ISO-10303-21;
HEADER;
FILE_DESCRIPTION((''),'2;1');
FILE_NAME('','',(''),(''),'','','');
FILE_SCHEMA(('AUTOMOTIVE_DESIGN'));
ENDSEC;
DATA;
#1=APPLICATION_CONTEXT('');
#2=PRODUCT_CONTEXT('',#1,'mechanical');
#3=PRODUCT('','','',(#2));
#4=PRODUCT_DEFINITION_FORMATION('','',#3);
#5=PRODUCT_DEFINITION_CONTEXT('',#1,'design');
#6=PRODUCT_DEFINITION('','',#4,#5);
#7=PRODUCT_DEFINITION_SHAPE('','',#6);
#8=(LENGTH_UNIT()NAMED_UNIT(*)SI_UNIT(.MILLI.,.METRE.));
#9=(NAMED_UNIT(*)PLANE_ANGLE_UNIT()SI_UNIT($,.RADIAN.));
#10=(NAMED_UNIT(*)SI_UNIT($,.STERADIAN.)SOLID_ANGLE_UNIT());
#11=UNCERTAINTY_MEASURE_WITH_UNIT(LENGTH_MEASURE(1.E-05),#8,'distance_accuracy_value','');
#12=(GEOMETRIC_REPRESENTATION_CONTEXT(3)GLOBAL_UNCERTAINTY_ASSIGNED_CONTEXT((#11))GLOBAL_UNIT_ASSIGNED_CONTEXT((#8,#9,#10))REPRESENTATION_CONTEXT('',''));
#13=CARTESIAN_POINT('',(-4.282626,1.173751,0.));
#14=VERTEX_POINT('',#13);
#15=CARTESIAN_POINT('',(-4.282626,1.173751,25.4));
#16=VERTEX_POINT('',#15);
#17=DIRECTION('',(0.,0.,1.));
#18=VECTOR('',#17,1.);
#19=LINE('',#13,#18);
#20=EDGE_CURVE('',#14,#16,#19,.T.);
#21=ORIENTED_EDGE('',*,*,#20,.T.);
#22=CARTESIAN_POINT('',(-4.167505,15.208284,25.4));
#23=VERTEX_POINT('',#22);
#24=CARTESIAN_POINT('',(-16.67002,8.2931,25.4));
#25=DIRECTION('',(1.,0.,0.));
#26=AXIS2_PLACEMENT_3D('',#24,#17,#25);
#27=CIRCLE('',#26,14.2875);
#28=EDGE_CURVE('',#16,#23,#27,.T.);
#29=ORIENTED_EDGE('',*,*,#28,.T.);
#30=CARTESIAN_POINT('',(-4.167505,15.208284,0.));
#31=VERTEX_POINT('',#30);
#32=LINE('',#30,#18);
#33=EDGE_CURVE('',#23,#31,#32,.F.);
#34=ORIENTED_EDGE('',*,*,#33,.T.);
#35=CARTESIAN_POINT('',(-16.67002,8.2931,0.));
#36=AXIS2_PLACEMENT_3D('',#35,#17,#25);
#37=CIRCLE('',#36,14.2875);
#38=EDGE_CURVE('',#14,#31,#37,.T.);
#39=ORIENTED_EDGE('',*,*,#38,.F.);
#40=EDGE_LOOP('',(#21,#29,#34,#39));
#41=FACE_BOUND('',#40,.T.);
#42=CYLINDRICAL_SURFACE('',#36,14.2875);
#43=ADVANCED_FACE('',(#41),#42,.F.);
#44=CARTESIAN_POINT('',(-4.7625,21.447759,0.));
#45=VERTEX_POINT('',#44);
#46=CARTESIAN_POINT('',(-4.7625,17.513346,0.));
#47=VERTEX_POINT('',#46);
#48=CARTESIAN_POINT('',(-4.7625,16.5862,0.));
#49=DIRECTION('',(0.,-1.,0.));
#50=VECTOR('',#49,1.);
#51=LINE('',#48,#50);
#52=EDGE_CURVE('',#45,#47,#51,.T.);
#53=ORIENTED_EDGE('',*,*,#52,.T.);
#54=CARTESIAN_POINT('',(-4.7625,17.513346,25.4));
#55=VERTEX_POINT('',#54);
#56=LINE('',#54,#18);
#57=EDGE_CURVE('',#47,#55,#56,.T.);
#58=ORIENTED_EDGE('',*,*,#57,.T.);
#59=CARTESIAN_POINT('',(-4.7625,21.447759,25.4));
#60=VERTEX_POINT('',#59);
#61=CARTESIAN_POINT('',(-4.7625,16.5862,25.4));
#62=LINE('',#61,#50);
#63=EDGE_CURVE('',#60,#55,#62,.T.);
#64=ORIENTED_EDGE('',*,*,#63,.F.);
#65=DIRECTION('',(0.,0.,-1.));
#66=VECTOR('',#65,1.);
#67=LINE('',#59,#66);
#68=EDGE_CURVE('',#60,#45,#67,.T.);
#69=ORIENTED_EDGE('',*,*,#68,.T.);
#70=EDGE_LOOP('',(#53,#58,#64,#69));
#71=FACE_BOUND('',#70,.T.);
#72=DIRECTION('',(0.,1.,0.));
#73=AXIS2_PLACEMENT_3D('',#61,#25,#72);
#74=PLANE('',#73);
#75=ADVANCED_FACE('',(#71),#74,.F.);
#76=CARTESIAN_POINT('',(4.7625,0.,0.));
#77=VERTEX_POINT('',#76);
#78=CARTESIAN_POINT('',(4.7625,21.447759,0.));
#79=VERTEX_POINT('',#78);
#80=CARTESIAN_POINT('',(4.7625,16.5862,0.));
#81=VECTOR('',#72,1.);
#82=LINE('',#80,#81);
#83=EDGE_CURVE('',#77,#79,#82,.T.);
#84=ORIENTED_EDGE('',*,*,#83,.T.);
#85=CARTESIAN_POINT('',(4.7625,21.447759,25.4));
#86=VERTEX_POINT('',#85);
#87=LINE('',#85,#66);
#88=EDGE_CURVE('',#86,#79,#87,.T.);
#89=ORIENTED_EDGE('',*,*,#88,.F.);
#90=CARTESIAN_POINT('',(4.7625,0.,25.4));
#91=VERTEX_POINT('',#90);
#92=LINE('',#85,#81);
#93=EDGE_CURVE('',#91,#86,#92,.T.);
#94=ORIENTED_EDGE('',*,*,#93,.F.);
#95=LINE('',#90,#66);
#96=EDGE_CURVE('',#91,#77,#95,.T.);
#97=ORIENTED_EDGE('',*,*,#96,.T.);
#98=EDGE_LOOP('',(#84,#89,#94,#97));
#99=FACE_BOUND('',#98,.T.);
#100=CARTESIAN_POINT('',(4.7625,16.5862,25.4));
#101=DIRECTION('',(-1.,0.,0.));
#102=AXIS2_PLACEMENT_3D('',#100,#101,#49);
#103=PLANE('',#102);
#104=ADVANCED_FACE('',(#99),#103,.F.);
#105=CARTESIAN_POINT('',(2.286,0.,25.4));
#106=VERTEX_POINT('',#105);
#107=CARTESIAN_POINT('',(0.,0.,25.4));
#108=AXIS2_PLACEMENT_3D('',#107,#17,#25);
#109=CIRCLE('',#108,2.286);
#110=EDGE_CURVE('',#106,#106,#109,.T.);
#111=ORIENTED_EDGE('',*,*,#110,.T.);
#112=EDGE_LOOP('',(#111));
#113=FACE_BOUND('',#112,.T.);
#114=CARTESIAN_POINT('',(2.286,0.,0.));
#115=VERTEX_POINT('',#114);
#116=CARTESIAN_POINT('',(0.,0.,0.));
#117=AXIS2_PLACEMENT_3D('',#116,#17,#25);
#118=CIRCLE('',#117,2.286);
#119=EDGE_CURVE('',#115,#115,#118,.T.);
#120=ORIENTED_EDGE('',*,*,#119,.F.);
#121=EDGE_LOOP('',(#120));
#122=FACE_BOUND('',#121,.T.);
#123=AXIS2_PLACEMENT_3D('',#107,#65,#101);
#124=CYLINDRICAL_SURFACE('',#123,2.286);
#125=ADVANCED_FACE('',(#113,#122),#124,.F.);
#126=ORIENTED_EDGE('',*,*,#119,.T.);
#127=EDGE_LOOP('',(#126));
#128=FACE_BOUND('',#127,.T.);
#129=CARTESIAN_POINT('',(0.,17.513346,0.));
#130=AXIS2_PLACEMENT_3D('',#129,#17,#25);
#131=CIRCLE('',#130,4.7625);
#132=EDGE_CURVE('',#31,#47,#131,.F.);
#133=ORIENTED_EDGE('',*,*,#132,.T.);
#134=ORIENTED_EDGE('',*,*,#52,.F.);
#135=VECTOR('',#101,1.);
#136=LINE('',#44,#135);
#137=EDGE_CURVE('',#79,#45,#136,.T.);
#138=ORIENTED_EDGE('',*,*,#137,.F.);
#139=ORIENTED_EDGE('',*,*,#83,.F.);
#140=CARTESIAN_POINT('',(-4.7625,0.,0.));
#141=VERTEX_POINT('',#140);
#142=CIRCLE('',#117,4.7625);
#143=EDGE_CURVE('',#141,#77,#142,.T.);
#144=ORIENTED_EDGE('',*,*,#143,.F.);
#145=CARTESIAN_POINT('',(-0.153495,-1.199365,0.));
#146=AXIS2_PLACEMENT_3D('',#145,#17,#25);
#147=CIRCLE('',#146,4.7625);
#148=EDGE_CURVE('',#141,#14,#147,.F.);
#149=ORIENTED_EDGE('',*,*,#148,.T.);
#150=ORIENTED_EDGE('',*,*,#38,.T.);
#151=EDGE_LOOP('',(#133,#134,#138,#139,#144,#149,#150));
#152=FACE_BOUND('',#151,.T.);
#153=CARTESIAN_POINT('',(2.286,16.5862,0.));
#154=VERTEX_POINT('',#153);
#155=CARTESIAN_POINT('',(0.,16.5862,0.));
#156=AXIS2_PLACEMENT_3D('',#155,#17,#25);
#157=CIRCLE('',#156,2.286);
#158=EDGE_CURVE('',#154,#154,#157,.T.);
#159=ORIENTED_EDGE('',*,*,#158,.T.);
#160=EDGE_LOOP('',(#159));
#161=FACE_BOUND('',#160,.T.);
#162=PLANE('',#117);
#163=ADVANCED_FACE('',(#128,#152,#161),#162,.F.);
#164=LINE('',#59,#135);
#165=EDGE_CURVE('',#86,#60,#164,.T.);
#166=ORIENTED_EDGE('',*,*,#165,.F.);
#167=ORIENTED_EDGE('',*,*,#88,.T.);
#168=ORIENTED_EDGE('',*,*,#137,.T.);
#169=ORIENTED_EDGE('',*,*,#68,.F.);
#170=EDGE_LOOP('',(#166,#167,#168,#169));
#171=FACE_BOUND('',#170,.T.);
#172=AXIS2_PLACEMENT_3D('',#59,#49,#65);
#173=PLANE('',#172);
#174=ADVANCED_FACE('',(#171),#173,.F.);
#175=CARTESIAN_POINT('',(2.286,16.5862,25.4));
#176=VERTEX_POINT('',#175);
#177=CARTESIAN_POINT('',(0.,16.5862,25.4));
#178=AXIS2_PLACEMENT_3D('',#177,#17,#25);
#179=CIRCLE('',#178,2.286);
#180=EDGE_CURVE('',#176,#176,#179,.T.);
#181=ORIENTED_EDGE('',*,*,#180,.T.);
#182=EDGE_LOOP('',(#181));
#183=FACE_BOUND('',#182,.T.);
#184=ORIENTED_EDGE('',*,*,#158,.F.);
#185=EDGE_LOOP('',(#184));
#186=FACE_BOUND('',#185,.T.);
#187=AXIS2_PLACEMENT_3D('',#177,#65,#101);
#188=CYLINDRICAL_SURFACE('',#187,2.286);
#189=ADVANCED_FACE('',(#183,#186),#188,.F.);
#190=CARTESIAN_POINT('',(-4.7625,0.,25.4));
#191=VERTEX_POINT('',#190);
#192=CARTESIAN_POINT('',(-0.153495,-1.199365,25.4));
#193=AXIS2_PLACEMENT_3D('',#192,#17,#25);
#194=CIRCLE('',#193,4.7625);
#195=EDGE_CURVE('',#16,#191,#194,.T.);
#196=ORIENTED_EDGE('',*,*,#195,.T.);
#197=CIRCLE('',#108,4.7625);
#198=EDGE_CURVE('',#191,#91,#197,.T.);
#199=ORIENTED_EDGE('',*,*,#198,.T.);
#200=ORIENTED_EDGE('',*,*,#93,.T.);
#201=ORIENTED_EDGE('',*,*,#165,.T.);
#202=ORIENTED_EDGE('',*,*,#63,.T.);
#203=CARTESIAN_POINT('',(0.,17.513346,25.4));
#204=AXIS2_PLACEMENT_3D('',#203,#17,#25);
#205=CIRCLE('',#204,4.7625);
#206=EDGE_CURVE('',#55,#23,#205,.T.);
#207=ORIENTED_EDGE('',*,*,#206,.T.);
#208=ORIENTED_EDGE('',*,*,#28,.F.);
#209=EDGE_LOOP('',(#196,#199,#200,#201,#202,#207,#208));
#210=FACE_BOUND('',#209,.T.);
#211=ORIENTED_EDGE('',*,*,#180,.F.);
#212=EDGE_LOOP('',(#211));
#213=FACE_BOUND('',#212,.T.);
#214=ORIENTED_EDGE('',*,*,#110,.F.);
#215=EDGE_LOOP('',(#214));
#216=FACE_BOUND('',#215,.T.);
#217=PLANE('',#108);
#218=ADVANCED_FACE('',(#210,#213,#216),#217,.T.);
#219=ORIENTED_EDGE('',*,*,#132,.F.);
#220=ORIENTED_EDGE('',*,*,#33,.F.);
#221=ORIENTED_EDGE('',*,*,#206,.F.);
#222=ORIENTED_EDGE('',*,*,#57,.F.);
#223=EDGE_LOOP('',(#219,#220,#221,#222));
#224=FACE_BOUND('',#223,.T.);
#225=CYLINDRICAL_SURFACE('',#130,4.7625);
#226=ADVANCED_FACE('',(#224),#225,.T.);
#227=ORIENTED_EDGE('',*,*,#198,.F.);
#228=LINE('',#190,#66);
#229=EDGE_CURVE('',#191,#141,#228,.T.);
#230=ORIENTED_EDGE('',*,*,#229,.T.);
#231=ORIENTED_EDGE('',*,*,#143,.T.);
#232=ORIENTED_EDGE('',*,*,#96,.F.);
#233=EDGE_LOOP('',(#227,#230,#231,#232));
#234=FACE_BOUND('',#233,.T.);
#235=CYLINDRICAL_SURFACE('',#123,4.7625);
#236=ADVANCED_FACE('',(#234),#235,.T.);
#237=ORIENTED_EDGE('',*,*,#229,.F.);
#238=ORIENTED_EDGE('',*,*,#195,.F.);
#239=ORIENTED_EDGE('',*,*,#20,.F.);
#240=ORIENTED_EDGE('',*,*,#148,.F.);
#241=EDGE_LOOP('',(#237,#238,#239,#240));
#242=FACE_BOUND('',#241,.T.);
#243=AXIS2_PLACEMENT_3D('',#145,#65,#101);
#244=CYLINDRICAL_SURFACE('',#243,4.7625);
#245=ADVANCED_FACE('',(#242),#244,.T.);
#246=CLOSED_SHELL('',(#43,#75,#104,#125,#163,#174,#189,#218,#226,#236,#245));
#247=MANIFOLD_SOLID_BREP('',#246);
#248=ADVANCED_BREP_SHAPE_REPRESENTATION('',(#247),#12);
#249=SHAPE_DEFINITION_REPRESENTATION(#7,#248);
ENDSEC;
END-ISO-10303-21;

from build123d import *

# Parameters (mm, degrees)
SKETCH1_R           = 2.286
BOSS_EXTRUDE1_DEPTH = 25.4
SKETCH2_R           = 14.2875
CUT_EXTRUDE1_DEPTH  = 34.583444905
FILLET1_R           = 4.7625


with BuildPart() as part:
    # Sketch1 → Boss-Extrude1 (new body)
    with BuildSketch(Plane.XY):
        with BuildLine():
            Line((4.7625, 16.5862), (4.7625, 0))
            ThreePointArc((4.7625, 0), (0, -4.7625), (-4.7625, 0))
            Line((-4.7625, 0), (-4.7625, 16.5862))
            Line((-4.7625, 16.5862), (-4.7625, 21.447758984))
            Line((-4.7625, 21.447758984), (4.7625, 21.447758984))
            Line((4.7625, 21.447758984), (4.7625, 16.5862))
        make_face()
        Circle(SKETCH1_R, mode=Mode.SUBTRACT)
        with Locations((0, 16.5862)):
            Circle(SKETCH1_R, mode=Mode.SUBTRACT)
    extrude(amount=BOSS_EXTRUDE1_DEPTH)

    # Sketch2 → Cut-Extrude1 (cut, through all)
    with BuildSketch(Plane.XY.offset(25.4)):
        with Locations((-16.67002, 8.2931)):
            Circle(SKETCH2_R)
    extrude(amount=-CUT_EXTRUDE1_DEPTH, mode=Mode.SUBTRACT)

    # Fillet1
    # the kernel refuses this fillet: 4.7625 mm, written as the material it takes off along each edge
    with BuildSketch(Plane(origin=(-4.7625, 0.397302149, -2.281929285), x_dir=(0.5257327344691161, 0.8506498056824712, 0), z_dir=(0, 0, 1))) as fillet1_piece_1:
        with BuildLine():
            CenterArc((1.064900333, -4.760069656), FILLET1_R, 91.830511452, 15.300937173)
            Line((-0.337964996, -0.208874745), (-0.366022303, -0.117850847))
            ThreePointArc((-0.366022303, -0.117850847), (-0.219058541, -0.023412979), (-0.050076043, 0.081024394))
            Line((-0.050076043, 0.081024394), (0.003042572, 0.095201393))
            ThreePointArc((0.003042572, 0.095201393), (0.456385857, 0.087958969), (0.909729142, 0.095201393))
            Line((0.909729142, 0.095201393), (0.912771714, 0))
        make_face()
    extrude(amount=29.963858571, mode=Mode.SUBTRACT)
    with BuildSketch(Plane(origin=(-4.7625, 16.188897851, -3.311119953), x_dir=(0, 1, 0), z_dir=(0, 0, 1))) as fillet1_piece_2:
        with BuildLine():
            CenterArc((1.324447981, -4.7625), FILLET1_R, 90, 28.947133413)
            Line((-0.980613477, -0.594995), (-1.026714706, -0.5116449))
            ThreePointArc((-1.026714706, -0.5116449), (-0.533743292, -0.225909554), (-0.052638652, 0.079383467))
            Line((-0.052638652, 0.079383467), (0, 0.09525))
            Line((0, 0.09525), (1.324447981, 0.09525))
            Line((1.324447981, 0.09525), (1.324447981, 0))
        make_face()
    extrude(amount=32.022239906, mode=Mode.SUBTRACT)


solid = part.part
